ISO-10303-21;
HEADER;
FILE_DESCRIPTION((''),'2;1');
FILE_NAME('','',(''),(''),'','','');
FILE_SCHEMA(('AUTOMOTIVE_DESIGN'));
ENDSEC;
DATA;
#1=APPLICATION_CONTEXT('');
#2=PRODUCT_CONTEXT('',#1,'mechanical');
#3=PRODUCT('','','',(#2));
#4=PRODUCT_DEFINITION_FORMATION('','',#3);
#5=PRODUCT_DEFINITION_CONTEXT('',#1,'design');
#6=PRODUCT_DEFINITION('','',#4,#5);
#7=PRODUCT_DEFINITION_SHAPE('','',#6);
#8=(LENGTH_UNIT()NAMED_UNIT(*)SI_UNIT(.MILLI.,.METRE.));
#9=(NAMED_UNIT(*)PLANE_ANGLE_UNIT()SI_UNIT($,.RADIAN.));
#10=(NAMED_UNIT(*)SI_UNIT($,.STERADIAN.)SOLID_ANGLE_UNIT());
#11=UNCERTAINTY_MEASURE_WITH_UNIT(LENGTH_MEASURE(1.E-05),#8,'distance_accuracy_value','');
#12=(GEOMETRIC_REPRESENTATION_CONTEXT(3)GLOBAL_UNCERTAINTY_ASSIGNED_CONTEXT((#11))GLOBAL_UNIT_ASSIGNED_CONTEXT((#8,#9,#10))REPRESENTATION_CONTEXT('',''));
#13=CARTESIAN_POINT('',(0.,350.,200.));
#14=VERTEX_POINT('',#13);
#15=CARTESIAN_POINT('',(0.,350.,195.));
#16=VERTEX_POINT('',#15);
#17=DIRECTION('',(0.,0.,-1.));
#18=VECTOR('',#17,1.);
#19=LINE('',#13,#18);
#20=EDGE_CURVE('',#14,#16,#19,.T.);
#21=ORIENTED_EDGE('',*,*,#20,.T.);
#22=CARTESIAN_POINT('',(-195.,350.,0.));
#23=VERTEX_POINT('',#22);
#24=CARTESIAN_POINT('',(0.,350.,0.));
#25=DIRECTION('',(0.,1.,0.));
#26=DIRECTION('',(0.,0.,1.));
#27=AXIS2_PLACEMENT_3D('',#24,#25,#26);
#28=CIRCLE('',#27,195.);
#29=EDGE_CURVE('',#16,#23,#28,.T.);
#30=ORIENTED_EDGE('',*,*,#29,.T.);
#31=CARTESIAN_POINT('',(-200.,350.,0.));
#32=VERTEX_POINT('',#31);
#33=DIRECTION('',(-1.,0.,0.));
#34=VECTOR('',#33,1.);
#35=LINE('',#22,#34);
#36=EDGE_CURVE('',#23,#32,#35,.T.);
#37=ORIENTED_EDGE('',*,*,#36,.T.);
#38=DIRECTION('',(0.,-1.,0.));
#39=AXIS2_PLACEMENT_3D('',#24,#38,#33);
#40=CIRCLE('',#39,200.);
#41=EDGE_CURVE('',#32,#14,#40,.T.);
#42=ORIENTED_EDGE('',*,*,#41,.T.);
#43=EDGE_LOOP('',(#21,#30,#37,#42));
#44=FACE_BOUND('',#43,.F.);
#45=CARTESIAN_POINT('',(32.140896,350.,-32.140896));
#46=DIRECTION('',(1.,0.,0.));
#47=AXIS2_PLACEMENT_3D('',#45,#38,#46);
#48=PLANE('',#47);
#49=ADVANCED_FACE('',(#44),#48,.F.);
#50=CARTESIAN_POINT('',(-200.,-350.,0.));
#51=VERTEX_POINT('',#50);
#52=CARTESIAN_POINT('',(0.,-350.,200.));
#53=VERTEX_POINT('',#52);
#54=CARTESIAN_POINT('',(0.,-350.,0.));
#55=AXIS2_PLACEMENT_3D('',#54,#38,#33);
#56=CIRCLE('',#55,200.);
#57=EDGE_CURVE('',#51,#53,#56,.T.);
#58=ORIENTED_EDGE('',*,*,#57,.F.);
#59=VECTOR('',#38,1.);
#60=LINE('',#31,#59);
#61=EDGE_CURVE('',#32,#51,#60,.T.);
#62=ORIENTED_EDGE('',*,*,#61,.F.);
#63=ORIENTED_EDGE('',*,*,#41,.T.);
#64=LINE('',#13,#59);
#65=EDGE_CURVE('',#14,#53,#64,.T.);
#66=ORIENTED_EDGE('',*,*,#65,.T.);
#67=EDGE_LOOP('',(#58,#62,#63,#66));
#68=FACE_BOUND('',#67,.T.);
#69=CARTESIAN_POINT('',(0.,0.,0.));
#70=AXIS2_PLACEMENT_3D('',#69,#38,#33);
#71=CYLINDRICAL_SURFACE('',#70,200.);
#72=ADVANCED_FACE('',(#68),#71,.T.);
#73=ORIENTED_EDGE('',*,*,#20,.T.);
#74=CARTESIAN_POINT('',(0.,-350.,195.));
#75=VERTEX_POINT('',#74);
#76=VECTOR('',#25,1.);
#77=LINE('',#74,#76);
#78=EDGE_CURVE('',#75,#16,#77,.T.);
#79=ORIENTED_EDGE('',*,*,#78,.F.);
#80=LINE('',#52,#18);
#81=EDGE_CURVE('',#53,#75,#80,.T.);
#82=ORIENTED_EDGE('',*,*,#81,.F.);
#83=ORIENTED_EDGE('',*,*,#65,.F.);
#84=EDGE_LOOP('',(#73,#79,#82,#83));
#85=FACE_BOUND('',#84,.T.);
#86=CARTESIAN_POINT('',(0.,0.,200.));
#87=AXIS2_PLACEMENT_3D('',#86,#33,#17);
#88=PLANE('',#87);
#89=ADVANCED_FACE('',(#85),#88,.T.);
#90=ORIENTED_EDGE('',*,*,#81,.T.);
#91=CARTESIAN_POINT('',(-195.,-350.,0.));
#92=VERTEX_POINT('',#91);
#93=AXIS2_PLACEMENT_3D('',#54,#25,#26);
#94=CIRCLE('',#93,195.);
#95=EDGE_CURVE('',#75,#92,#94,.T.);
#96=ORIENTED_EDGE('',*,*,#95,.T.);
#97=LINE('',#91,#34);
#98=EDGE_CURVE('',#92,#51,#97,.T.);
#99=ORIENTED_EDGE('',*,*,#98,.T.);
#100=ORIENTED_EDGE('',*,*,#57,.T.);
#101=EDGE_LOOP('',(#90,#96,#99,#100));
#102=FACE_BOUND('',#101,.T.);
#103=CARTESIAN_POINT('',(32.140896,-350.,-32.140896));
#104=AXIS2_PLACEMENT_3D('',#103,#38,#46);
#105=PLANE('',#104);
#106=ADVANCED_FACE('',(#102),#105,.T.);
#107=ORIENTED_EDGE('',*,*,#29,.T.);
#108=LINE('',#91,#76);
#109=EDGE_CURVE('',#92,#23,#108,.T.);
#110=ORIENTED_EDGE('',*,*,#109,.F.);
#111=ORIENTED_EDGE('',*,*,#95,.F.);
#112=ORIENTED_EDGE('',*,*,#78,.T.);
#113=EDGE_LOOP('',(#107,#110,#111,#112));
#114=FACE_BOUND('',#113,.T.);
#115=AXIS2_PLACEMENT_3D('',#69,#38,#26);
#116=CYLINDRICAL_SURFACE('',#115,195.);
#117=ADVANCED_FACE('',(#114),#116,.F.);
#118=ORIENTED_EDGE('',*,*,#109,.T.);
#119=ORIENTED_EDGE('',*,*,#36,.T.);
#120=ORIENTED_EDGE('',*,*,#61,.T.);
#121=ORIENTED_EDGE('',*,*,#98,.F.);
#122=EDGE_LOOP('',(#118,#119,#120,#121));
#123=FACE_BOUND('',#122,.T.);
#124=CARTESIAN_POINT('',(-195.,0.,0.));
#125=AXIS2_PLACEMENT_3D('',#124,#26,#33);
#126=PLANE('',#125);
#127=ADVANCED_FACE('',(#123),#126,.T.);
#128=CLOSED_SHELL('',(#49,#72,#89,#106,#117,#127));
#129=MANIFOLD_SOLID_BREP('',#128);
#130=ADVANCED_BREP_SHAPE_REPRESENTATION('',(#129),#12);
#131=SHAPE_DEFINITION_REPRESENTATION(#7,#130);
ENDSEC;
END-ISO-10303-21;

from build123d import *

# Parameters (mm, degrees)
F1_DEPTH = 350


# Not quite as in the source:
# - a feature of the source that left no trace in its solid (it failed there, or was rolled back) is left out
# - the program builds the solid bodies; features that only make, move or delete a surface that nothing else refers to are left out


with BuildPart() as f1:
    # F0 (on Front) → F1 (new body, symmetric)
    with BuildSketch(Plane.XZ):
        with BuildLine():
            Line((-195, 0), (-200, 0))
            ThreePointArc((-200, 0), (141.4213562373, -141.4213562373), (0, 200))
            Line((0, 200), (0, 195))
            ThreePointArc((0, 195), (137.8858223314, -137.8858223314), (-195, 0))
        make_face()
    extrude(amount=F1_DEPTH, both=True)


solid = f1.part
